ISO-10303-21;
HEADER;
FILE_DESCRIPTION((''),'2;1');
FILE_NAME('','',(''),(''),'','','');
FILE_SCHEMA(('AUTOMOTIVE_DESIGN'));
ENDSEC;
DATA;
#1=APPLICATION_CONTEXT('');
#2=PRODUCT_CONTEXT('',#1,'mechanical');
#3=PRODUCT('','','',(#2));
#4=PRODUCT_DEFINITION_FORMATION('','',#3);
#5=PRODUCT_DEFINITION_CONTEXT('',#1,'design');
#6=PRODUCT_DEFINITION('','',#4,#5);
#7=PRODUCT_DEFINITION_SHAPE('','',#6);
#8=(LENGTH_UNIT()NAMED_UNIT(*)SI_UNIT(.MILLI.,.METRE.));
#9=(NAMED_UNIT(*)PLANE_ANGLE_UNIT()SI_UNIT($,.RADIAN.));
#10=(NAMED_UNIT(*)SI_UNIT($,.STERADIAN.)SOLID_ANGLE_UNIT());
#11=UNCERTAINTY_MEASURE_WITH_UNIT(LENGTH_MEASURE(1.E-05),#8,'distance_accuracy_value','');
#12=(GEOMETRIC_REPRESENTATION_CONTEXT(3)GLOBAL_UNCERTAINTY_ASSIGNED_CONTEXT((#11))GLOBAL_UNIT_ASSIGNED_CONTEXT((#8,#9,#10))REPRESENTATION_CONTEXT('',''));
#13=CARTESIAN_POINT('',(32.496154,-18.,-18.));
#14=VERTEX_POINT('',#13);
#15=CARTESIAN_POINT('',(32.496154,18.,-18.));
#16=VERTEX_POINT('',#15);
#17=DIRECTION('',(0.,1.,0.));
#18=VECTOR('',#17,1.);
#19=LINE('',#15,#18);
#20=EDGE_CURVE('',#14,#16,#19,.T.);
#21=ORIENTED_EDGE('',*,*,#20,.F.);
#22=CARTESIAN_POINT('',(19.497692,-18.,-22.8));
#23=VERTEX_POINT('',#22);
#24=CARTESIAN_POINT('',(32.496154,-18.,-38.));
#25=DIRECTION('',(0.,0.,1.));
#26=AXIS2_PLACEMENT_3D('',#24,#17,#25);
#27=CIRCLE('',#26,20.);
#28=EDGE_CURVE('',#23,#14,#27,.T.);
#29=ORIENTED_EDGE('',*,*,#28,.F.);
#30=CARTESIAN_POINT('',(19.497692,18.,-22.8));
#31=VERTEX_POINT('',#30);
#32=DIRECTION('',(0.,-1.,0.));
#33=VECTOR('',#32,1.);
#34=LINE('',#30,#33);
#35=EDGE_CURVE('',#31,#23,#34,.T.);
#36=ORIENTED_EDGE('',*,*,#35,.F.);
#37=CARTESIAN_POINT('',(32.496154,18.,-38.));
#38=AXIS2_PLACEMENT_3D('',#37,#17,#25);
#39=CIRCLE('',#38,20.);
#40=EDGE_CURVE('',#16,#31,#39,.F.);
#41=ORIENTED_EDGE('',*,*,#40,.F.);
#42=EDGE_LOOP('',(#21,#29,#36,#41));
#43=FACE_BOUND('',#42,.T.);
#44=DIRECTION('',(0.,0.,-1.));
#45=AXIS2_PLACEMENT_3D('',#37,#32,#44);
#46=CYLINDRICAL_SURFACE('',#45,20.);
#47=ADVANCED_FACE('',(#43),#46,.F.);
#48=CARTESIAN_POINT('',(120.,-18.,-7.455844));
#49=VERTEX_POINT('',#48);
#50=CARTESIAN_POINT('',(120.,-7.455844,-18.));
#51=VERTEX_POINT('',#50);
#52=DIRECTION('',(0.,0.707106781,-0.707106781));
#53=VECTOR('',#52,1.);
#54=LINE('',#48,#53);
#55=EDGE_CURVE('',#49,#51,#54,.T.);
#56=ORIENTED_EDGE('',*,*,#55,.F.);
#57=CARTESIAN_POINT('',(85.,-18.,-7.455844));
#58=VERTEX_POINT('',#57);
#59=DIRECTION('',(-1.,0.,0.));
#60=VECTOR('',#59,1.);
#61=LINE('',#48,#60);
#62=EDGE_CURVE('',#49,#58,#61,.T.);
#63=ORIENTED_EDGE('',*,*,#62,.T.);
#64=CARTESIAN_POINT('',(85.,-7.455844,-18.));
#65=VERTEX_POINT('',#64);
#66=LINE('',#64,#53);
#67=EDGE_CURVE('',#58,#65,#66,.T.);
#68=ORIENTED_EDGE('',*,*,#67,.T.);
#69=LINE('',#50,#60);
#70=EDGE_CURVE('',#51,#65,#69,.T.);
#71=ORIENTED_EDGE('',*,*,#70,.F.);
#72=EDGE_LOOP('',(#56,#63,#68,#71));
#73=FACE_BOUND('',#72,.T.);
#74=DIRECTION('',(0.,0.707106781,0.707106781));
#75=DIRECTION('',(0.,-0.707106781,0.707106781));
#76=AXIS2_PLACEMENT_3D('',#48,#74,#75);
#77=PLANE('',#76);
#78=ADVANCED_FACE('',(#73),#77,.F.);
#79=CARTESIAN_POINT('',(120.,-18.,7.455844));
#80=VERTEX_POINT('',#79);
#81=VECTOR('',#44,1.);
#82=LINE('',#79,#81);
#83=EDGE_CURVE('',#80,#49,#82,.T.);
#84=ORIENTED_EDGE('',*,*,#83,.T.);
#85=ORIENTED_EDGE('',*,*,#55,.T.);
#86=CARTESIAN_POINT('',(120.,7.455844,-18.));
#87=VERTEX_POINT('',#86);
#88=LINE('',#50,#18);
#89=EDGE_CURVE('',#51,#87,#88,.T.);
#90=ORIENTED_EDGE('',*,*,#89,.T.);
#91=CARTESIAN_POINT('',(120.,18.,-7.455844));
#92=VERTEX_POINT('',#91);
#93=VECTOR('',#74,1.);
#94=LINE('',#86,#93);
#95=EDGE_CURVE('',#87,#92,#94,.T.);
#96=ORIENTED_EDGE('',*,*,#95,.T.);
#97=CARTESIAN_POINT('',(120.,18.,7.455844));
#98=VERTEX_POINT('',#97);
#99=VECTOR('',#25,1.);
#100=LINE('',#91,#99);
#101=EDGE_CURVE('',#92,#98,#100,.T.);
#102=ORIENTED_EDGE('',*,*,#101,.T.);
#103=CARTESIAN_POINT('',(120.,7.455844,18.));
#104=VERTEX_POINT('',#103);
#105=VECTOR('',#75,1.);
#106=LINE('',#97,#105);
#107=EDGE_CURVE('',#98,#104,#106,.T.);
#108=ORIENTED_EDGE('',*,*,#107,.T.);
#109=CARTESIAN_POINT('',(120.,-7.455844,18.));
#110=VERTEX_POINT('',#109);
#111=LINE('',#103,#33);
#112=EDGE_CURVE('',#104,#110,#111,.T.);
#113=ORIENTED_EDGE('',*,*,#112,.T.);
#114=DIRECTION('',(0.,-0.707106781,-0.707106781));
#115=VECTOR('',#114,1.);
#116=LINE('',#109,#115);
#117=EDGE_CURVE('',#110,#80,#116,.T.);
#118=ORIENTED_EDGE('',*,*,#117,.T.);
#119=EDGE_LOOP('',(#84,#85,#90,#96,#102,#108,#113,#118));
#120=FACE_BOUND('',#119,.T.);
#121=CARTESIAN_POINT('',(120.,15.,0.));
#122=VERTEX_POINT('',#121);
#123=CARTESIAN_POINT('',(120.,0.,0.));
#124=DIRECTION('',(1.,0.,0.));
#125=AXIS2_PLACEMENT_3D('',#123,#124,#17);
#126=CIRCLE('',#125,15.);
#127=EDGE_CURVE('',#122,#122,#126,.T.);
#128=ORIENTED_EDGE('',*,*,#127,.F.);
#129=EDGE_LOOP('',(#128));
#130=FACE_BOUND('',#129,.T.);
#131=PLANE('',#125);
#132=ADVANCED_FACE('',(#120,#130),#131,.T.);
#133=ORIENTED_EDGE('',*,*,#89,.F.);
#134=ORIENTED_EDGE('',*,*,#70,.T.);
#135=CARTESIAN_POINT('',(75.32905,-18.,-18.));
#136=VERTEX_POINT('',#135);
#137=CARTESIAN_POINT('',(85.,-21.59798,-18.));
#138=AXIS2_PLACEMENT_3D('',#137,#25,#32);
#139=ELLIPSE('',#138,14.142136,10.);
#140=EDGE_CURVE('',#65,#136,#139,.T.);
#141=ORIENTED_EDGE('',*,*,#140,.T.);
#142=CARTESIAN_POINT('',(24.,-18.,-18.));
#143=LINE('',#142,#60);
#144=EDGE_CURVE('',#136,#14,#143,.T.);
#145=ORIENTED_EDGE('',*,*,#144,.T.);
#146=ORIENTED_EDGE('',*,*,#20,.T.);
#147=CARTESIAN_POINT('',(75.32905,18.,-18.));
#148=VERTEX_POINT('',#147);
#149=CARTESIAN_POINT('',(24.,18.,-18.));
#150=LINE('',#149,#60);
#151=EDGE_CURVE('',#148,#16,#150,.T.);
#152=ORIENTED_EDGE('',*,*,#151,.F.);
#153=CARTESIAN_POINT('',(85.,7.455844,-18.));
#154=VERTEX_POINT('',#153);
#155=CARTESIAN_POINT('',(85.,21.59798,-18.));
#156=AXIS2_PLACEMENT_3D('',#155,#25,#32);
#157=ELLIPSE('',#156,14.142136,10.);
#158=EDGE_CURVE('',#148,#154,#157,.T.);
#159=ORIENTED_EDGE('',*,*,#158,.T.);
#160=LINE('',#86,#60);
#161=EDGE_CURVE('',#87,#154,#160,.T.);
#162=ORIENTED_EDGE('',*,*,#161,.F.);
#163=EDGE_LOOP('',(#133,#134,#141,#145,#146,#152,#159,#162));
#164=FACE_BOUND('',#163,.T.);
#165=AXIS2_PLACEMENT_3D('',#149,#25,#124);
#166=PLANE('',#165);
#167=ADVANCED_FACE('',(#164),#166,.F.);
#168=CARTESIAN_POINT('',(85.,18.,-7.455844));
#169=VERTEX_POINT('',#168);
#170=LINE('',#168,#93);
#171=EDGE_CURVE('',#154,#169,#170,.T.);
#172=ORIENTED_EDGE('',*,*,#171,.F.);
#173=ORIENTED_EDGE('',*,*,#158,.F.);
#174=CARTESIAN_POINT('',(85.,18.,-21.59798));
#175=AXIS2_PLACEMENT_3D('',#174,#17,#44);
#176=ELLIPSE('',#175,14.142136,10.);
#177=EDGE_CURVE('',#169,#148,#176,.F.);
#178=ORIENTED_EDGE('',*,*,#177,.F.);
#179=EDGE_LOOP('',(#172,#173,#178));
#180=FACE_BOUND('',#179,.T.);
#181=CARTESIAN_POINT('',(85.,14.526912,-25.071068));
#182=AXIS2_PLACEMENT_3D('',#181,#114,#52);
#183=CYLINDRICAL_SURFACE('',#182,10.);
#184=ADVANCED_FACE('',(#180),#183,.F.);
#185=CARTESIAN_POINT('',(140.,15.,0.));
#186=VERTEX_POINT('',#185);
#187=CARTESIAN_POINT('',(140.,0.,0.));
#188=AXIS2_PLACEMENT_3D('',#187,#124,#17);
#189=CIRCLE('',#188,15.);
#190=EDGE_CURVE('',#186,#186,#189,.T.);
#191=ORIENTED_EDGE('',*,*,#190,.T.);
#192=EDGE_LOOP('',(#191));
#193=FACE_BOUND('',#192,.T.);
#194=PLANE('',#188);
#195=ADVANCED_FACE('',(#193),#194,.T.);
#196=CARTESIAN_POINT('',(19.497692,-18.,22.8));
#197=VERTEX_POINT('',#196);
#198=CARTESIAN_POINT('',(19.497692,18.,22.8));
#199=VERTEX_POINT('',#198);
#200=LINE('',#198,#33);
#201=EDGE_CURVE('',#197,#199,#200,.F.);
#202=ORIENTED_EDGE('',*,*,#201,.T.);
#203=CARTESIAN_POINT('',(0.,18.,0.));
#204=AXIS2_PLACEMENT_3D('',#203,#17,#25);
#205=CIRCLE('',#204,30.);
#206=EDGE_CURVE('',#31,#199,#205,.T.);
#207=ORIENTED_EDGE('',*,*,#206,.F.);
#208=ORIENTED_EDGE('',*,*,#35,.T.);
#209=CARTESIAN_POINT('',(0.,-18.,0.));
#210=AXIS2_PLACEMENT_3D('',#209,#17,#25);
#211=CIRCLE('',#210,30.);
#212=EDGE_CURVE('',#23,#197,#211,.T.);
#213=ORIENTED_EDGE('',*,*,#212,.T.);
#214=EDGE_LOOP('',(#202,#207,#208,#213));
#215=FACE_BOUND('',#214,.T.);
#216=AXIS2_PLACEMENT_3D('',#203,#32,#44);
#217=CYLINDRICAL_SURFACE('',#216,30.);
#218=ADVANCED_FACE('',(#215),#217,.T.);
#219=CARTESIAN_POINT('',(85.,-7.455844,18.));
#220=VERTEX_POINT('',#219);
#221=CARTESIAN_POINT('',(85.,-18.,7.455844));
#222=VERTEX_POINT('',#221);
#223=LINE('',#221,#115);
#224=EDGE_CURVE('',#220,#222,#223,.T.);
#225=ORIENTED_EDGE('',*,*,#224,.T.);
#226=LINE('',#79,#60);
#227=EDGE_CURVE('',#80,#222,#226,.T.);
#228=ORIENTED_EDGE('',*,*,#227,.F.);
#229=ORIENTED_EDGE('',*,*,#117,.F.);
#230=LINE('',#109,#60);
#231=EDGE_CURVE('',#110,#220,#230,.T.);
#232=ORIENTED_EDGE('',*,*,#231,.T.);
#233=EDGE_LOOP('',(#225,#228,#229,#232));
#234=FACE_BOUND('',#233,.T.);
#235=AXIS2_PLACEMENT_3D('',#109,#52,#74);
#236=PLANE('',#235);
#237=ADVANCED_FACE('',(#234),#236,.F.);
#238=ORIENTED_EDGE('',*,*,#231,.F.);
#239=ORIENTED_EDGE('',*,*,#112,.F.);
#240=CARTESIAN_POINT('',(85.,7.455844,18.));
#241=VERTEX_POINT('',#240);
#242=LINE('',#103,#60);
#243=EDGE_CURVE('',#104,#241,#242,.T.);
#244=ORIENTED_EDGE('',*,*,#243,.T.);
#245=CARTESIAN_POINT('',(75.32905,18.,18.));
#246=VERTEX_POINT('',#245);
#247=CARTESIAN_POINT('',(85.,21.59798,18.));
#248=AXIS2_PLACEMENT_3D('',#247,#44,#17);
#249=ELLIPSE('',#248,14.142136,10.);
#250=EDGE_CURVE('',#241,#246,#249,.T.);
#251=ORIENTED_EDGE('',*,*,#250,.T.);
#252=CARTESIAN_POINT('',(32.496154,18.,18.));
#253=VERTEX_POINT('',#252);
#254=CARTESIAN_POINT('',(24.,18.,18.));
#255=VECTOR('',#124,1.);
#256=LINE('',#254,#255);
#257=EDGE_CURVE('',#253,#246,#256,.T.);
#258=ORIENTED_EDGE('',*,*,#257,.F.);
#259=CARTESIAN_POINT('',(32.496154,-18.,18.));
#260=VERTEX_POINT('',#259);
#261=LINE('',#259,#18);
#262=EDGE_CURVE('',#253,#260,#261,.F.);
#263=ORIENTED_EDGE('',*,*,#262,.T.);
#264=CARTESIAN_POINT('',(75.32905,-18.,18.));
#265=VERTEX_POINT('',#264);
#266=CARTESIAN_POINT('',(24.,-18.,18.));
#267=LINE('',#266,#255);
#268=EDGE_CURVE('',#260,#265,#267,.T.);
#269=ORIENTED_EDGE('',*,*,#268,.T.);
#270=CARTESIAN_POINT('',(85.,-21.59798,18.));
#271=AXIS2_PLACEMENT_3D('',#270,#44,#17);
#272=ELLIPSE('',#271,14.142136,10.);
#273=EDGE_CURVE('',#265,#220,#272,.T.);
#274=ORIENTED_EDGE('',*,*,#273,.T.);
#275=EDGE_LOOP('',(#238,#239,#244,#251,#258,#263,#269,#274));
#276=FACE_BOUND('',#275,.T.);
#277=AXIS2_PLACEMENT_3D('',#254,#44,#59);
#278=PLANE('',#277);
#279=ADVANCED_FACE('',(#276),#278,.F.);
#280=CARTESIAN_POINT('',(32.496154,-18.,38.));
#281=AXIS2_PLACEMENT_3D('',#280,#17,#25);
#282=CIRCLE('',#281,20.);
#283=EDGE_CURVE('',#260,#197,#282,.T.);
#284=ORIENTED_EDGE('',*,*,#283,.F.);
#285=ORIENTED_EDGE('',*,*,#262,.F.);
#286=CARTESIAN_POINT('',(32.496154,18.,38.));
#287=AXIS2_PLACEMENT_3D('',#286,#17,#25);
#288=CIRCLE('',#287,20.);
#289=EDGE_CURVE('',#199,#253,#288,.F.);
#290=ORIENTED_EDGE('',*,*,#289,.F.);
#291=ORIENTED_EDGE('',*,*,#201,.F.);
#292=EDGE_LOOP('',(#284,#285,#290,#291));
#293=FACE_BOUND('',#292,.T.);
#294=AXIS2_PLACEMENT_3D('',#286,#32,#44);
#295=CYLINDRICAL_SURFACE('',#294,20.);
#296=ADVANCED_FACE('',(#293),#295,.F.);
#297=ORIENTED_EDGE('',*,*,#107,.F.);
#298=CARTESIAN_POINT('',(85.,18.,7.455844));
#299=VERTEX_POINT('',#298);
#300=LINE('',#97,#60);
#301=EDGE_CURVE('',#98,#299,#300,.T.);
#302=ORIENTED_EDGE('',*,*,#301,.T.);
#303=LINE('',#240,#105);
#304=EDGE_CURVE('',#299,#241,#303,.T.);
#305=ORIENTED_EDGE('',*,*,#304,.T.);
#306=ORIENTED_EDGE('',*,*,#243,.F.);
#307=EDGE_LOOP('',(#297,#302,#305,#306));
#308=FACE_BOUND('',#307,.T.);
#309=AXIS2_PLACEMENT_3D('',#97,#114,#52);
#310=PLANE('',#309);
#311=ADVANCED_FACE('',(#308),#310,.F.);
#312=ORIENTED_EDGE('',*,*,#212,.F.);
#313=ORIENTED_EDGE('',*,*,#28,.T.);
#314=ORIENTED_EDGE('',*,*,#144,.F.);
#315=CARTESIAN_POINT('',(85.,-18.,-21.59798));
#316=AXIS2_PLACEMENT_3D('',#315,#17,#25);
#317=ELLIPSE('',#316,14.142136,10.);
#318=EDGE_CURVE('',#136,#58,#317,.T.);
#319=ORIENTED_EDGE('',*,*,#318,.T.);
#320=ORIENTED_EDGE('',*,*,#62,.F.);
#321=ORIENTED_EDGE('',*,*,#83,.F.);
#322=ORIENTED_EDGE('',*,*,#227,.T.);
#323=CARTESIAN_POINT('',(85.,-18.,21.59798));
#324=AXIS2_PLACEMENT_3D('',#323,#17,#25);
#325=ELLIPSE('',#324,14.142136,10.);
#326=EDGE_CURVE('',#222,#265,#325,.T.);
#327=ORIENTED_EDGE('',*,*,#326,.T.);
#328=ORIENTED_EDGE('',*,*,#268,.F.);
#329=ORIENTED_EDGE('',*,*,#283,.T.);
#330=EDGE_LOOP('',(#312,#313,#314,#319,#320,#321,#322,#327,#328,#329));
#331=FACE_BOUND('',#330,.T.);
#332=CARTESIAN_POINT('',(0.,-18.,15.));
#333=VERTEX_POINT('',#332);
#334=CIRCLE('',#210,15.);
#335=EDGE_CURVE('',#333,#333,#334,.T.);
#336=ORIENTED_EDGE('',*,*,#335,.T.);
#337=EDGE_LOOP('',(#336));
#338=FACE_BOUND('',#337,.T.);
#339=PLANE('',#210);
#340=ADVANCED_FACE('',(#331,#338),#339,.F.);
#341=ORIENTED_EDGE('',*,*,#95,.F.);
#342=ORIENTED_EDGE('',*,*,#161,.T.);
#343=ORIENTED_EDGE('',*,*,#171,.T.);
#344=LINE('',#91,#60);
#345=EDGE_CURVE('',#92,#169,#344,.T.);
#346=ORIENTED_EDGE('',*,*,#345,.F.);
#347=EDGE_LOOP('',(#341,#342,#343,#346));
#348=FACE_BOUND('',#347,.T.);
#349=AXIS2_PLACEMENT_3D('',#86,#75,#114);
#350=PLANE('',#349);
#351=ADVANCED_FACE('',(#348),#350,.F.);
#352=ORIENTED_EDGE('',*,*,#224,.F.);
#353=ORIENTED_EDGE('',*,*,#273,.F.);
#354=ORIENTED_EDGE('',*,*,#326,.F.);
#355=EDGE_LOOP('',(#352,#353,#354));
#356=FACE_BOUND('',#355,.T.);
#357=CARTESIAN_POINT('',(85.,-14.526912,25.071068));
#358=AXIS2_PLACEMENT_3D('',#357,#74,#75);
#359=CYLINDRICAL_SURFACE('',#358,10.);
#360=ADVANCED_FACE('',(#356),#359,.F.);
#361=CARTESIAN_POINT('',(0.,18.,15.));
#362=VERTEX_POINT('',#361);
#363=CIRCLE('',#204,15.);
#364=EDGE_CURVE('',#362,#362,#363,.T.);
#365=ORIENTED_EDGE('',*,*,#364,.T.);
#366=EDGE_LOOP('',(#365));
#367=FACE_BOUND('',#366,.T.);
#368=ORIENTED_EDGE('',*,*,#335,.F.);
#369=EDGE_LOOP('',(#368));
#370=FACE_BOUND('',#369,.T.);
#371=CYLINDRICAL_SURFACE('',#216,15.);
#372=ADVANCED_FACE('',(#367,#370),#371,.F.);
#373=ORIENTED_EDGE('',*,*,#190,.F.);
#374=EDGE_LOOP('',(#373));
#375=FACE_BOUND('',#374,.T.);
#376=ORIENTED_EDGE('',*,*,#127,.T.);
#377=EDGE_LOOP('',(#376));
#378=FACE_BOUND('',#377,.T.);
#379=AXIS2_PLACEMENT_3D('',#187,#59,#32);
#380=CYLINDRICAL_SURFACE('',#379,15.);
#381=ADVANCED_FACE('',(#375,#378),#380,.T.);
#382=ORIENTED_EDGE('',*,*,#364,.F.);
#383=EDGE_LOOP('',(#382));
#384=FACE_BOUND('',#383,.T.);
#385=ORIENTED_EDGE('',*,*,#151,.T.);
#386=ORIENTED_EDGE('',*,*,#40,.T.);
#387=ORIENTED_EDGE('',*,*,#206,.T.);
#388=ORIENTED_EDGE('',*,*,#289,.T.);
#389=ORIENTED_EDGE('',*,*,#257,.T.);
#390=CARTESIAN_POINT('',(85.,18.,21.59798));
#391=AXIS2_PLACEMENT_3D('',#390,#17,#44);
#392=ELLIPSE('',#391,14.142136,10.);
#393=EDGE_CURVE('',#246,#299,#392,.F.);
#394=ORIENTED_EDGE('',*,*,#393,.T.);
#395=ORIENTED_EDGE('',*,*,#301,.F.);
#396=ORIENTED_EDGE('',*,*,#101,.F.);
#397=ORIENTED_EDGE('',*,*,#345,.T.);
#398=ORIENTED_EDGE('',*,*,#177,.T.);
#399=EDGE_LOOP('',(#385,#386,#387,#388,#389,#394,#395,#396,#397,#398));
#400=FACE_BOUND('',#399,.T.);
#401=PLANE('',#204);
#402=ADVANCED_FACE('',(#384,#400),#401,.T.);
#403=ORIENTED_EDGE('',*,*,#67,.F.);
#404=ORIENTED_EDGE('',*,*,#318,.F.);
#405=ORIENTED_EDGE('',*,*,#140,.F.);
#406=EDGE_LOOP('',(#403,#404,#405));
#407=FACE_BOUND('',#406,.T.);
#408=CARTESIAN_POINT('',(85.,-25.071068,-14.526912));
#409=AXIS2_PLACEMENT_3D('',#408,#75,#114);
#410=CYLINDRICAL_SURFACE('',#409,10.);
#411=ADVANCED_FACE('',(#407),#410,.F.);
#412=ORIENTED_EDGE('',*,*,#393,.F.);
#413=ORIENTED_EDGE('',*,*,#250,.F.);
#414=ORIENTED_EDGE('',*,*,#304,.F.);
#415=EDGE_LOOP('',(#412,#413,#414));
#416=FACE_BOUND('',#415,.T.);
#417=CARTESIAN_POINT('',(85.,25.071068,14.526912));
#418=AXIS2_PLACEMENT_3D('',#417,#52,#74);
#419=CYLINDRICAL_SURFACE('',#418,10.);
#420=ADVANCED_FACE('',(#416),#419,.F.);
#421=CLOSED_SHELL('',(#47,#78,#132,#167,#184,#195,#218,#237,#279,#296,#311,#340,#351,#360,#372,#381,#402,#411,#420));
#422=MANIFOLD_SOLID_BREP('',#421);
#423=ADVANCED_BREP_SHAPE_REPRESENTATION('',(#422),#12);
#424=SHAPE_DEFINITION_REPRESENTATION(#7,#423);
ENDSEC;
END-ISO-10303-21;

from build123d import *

# Parameters (mm, degrees)
CROQUIS1_R              = 15
SALIENTE_EXTRUIR2_DEPTH = 18
SALIENTE_EXTRUIR3_DEPTH = 45
REDONDEO1_R             = 10
REDONDEO2_R             = 20
CROQUIS3_R              = 15
SALIENTE_EXTRUIR4_DEPTH = 20


with BuildPart() as part:
    # Croquis1 → Saliente-Extruir2 (new, symmetric)
    with BuildSketch(Plane(origin=(0, 0, 0), x_dir=(1, 0, 0), z_dir=(0, 1, 0))):
        with BuildLine():
            Line((24, -18), (75, -18))
            Line((75, -18), (75, 18))
            Line((75, 18), (24, 18))
            ThreePointArc((24, 18), (-30, 0), (24, -18))
        make_face()
        with Locations(Location((0, 0, 0), (0, 0, 270))):
            Circle(CROQUIS1_R, mode=Mode.SUBTRACT)
    extrude(amount=SALIENTE_EXTRUIR2_DEPTH, both=True)

    # Croquis2 → Saliente-Extruir3 (add)
    with BuildSketch(Plane(origin=(75, 0, 0), x_dir=(0, 0, -1), z_dir=(1, 0, 0))):
        Polygon((-18, -7.455844123), (-7.455844123, -18), (7.455844123, -18), (18, -7.455844123), (18, 7.455844123), (7.455844123, 18), (-7.455844123, 18), (-18, 7.455844123), align=None)
    extrude(amount=SALIENTE_EXTRUIR3_DEPTH)

    # Redondeo1
    # the kernel refuses this fillet: 10 mm, written as the material it adds along each edge
    with BuildSketch(Plane(origin=(75, 10.221825407, 35.67766953), x_dir=(-1.4210854715202005e-15, -0.7071067811865512, 0.7071067811865439), z_dir=(0, -0.7071067811865439, -0.7071067811865512))) as redondeo1_piece_1_section:
        with BuildLine():
            CenterArc((REDONDEO1_R, -REDONDEO1_R), REDONDEO1_R, 90, 90)
            Line((0, -REDONDEO1_R), (0, 0))
            Line((0, 0), (REDONDEO1_R, 0))
        make_face()
    redondeo1_piece_1 = extrude(amount=64.911688245, mode=Mode.PRIVATE)
    redondeo1_piece_1 = split(redondeo1_piece_1, bisect_by=Plane(origin=(77.775136413, -18, 13.729156697), z_dir=(0, 1, 0)), keep=Keep.TOP, mode=Mode.PRIVATE)
    redondeo1_piece_1 = split(redondeo1_piece_1, bisect_by=Plane(origin=(77.775136413, -13.729156697, 18), z_dir=(0, 0, -1)), keep=Keep.TOP, mode=Mode.PRIVATE)
    add(redondeo1_piece_1)
    with BuildSketch(Plane(origin=(75, -35.67766953, 10.221825407), x_dir=(0, -0.707106781186544, -0.7071067811865511), z_dir=(0, 0.7071067811865511, -0.7071067811865441))) as redondeo1_piece_2_section:
        with BuildLine():
            CenterArc((REDONDEO1_R, -REDONDEO1_R), REDONDEO1_R, 90, 90)
            Line((0, -REDONDEO1_R), (0, 0))
            Line((0, 0), (REDONDEO1_R, 0))
        make_face()
    redondeo1_piece_2 = extrude(amount=64.911688245, mode=Mode.PRIVATE)
    redondeo1_piece_2 = split(redondeo1_piece_2, bisect_by=Plane(origin=(77.775136413, -18, -13.729156697), z_dir=(0, 1, 0)), keep=Keep.TOP, mode=Mode.PRIVATE)
    redondeo1_piece_2 = split(redondeo1_piece_2, bisect_by=Plane(origin=(77.775136413, -13.729156697, -18), z_dir=(0, 0, 1)), keep=Keep.TOP, mode=Mode.PRIVATE)
    add(redondeo1_piece_2)
    with BuildSketch(Plane(origin=(75, -10.221825407, -35.67766953), x_dir=(1.421085471520201e-15, 0.7071067811865511, -0.7071067811865439), z_dir=(0, 0.7071067811865439, 0.7071067811865511))) as redondeo1_piece_3_section:
        with BuildLine():
            CenterArc((REDONDEO1_R, -REDONDEO1_R), REDONDEO1_R, 90, 90)
            Line((0, -REDONDEO1_R), (0, 0))
            Line((0, 0), (REDONDEO1_R, 0))
        make_face()
    redondeo1_piece_3 = extrude(amount=64.911688245, mode=Mode.PRIVATE)
    redondeo1_piece_3 = split(redondeo1_piece_3, bisect_by=Plane(origin=(77.775136413, 18, -13.729156697), z_dir=(0, -1, 0)), keep=Keep.TOP, mode=Mode.PRIVATE)
    redondeo1_piece_3 = split(redondeo1_piece_3, bisect_by=Plane(origin=(77.775136413, 13.729156697, -18), z_dir=(0, 0, 1)), keep=Keep.TOP, mode=Mode.PRIVATE)
    add(redondeo1_piece_3)
    with BuildSketch(Plane(origin=(75, 35.67766953, -10.221825407), x_dir=(0, 0.7071067811865458, 0.7071067811865493), z_dir=(0, -0.7071067811865493, 0.7071067811865458))) as redondeo1_piece_4_section:
        with BuildLine():
            CenterArc((REDONDEO1_R, -REDONDEO1_R), REDONDEO1_R, 90, 90)
            Line((0, -REDONDEO1_R), (0, 0))
            Line((0, 0), (REDONDEO1_R, 0))
        make_face()
    redondeo1_piece_4 = extrude(amount=64.911688245, mode=Mode.PRIVATE)
    redondeo1_piece_4 = split(redondeo1_piece_4, bisect_by=Plane(origin=(77.775136413, 13.729156697, 18), z_dir=(0, 0, -1)), keep=Keep.TOP, mode=Mode.PRIVATE)
    redondeo1_piece_4 = split(redondeo1_piece_4, bisect_by=Plane(origin=(77.775136413, 18, 13.729156697), z_dir=(0, -1, 0)), keep=Keep.TOP, mode=Mode.PRIVATE)
    add(redondeo1_piece_4)

    # Redondeo2
    redondeo2_edges = [part.edges().sort_by_distance(p)[0] for p in [
        (24, 0, 18),
        (24, 0, -18),
    ]]
    fillet(redondeo2_edges, radius=REDONDEO2_R)

    # Croquis3 → Saliente-Extruir4 (add)
    with BuildSketch(Plane(origin=(120, 0, 0), x_dir=(0, 0, -1), z_dir=(1, 0, 0))):
        with Locations(Location((0, 0, 0), (0, 0, 90))):
            Circle(CROQUIS3_R)
    extrude(amount=SALIENTE_EXTRUIR4_DEPTH)


solid = part.part
